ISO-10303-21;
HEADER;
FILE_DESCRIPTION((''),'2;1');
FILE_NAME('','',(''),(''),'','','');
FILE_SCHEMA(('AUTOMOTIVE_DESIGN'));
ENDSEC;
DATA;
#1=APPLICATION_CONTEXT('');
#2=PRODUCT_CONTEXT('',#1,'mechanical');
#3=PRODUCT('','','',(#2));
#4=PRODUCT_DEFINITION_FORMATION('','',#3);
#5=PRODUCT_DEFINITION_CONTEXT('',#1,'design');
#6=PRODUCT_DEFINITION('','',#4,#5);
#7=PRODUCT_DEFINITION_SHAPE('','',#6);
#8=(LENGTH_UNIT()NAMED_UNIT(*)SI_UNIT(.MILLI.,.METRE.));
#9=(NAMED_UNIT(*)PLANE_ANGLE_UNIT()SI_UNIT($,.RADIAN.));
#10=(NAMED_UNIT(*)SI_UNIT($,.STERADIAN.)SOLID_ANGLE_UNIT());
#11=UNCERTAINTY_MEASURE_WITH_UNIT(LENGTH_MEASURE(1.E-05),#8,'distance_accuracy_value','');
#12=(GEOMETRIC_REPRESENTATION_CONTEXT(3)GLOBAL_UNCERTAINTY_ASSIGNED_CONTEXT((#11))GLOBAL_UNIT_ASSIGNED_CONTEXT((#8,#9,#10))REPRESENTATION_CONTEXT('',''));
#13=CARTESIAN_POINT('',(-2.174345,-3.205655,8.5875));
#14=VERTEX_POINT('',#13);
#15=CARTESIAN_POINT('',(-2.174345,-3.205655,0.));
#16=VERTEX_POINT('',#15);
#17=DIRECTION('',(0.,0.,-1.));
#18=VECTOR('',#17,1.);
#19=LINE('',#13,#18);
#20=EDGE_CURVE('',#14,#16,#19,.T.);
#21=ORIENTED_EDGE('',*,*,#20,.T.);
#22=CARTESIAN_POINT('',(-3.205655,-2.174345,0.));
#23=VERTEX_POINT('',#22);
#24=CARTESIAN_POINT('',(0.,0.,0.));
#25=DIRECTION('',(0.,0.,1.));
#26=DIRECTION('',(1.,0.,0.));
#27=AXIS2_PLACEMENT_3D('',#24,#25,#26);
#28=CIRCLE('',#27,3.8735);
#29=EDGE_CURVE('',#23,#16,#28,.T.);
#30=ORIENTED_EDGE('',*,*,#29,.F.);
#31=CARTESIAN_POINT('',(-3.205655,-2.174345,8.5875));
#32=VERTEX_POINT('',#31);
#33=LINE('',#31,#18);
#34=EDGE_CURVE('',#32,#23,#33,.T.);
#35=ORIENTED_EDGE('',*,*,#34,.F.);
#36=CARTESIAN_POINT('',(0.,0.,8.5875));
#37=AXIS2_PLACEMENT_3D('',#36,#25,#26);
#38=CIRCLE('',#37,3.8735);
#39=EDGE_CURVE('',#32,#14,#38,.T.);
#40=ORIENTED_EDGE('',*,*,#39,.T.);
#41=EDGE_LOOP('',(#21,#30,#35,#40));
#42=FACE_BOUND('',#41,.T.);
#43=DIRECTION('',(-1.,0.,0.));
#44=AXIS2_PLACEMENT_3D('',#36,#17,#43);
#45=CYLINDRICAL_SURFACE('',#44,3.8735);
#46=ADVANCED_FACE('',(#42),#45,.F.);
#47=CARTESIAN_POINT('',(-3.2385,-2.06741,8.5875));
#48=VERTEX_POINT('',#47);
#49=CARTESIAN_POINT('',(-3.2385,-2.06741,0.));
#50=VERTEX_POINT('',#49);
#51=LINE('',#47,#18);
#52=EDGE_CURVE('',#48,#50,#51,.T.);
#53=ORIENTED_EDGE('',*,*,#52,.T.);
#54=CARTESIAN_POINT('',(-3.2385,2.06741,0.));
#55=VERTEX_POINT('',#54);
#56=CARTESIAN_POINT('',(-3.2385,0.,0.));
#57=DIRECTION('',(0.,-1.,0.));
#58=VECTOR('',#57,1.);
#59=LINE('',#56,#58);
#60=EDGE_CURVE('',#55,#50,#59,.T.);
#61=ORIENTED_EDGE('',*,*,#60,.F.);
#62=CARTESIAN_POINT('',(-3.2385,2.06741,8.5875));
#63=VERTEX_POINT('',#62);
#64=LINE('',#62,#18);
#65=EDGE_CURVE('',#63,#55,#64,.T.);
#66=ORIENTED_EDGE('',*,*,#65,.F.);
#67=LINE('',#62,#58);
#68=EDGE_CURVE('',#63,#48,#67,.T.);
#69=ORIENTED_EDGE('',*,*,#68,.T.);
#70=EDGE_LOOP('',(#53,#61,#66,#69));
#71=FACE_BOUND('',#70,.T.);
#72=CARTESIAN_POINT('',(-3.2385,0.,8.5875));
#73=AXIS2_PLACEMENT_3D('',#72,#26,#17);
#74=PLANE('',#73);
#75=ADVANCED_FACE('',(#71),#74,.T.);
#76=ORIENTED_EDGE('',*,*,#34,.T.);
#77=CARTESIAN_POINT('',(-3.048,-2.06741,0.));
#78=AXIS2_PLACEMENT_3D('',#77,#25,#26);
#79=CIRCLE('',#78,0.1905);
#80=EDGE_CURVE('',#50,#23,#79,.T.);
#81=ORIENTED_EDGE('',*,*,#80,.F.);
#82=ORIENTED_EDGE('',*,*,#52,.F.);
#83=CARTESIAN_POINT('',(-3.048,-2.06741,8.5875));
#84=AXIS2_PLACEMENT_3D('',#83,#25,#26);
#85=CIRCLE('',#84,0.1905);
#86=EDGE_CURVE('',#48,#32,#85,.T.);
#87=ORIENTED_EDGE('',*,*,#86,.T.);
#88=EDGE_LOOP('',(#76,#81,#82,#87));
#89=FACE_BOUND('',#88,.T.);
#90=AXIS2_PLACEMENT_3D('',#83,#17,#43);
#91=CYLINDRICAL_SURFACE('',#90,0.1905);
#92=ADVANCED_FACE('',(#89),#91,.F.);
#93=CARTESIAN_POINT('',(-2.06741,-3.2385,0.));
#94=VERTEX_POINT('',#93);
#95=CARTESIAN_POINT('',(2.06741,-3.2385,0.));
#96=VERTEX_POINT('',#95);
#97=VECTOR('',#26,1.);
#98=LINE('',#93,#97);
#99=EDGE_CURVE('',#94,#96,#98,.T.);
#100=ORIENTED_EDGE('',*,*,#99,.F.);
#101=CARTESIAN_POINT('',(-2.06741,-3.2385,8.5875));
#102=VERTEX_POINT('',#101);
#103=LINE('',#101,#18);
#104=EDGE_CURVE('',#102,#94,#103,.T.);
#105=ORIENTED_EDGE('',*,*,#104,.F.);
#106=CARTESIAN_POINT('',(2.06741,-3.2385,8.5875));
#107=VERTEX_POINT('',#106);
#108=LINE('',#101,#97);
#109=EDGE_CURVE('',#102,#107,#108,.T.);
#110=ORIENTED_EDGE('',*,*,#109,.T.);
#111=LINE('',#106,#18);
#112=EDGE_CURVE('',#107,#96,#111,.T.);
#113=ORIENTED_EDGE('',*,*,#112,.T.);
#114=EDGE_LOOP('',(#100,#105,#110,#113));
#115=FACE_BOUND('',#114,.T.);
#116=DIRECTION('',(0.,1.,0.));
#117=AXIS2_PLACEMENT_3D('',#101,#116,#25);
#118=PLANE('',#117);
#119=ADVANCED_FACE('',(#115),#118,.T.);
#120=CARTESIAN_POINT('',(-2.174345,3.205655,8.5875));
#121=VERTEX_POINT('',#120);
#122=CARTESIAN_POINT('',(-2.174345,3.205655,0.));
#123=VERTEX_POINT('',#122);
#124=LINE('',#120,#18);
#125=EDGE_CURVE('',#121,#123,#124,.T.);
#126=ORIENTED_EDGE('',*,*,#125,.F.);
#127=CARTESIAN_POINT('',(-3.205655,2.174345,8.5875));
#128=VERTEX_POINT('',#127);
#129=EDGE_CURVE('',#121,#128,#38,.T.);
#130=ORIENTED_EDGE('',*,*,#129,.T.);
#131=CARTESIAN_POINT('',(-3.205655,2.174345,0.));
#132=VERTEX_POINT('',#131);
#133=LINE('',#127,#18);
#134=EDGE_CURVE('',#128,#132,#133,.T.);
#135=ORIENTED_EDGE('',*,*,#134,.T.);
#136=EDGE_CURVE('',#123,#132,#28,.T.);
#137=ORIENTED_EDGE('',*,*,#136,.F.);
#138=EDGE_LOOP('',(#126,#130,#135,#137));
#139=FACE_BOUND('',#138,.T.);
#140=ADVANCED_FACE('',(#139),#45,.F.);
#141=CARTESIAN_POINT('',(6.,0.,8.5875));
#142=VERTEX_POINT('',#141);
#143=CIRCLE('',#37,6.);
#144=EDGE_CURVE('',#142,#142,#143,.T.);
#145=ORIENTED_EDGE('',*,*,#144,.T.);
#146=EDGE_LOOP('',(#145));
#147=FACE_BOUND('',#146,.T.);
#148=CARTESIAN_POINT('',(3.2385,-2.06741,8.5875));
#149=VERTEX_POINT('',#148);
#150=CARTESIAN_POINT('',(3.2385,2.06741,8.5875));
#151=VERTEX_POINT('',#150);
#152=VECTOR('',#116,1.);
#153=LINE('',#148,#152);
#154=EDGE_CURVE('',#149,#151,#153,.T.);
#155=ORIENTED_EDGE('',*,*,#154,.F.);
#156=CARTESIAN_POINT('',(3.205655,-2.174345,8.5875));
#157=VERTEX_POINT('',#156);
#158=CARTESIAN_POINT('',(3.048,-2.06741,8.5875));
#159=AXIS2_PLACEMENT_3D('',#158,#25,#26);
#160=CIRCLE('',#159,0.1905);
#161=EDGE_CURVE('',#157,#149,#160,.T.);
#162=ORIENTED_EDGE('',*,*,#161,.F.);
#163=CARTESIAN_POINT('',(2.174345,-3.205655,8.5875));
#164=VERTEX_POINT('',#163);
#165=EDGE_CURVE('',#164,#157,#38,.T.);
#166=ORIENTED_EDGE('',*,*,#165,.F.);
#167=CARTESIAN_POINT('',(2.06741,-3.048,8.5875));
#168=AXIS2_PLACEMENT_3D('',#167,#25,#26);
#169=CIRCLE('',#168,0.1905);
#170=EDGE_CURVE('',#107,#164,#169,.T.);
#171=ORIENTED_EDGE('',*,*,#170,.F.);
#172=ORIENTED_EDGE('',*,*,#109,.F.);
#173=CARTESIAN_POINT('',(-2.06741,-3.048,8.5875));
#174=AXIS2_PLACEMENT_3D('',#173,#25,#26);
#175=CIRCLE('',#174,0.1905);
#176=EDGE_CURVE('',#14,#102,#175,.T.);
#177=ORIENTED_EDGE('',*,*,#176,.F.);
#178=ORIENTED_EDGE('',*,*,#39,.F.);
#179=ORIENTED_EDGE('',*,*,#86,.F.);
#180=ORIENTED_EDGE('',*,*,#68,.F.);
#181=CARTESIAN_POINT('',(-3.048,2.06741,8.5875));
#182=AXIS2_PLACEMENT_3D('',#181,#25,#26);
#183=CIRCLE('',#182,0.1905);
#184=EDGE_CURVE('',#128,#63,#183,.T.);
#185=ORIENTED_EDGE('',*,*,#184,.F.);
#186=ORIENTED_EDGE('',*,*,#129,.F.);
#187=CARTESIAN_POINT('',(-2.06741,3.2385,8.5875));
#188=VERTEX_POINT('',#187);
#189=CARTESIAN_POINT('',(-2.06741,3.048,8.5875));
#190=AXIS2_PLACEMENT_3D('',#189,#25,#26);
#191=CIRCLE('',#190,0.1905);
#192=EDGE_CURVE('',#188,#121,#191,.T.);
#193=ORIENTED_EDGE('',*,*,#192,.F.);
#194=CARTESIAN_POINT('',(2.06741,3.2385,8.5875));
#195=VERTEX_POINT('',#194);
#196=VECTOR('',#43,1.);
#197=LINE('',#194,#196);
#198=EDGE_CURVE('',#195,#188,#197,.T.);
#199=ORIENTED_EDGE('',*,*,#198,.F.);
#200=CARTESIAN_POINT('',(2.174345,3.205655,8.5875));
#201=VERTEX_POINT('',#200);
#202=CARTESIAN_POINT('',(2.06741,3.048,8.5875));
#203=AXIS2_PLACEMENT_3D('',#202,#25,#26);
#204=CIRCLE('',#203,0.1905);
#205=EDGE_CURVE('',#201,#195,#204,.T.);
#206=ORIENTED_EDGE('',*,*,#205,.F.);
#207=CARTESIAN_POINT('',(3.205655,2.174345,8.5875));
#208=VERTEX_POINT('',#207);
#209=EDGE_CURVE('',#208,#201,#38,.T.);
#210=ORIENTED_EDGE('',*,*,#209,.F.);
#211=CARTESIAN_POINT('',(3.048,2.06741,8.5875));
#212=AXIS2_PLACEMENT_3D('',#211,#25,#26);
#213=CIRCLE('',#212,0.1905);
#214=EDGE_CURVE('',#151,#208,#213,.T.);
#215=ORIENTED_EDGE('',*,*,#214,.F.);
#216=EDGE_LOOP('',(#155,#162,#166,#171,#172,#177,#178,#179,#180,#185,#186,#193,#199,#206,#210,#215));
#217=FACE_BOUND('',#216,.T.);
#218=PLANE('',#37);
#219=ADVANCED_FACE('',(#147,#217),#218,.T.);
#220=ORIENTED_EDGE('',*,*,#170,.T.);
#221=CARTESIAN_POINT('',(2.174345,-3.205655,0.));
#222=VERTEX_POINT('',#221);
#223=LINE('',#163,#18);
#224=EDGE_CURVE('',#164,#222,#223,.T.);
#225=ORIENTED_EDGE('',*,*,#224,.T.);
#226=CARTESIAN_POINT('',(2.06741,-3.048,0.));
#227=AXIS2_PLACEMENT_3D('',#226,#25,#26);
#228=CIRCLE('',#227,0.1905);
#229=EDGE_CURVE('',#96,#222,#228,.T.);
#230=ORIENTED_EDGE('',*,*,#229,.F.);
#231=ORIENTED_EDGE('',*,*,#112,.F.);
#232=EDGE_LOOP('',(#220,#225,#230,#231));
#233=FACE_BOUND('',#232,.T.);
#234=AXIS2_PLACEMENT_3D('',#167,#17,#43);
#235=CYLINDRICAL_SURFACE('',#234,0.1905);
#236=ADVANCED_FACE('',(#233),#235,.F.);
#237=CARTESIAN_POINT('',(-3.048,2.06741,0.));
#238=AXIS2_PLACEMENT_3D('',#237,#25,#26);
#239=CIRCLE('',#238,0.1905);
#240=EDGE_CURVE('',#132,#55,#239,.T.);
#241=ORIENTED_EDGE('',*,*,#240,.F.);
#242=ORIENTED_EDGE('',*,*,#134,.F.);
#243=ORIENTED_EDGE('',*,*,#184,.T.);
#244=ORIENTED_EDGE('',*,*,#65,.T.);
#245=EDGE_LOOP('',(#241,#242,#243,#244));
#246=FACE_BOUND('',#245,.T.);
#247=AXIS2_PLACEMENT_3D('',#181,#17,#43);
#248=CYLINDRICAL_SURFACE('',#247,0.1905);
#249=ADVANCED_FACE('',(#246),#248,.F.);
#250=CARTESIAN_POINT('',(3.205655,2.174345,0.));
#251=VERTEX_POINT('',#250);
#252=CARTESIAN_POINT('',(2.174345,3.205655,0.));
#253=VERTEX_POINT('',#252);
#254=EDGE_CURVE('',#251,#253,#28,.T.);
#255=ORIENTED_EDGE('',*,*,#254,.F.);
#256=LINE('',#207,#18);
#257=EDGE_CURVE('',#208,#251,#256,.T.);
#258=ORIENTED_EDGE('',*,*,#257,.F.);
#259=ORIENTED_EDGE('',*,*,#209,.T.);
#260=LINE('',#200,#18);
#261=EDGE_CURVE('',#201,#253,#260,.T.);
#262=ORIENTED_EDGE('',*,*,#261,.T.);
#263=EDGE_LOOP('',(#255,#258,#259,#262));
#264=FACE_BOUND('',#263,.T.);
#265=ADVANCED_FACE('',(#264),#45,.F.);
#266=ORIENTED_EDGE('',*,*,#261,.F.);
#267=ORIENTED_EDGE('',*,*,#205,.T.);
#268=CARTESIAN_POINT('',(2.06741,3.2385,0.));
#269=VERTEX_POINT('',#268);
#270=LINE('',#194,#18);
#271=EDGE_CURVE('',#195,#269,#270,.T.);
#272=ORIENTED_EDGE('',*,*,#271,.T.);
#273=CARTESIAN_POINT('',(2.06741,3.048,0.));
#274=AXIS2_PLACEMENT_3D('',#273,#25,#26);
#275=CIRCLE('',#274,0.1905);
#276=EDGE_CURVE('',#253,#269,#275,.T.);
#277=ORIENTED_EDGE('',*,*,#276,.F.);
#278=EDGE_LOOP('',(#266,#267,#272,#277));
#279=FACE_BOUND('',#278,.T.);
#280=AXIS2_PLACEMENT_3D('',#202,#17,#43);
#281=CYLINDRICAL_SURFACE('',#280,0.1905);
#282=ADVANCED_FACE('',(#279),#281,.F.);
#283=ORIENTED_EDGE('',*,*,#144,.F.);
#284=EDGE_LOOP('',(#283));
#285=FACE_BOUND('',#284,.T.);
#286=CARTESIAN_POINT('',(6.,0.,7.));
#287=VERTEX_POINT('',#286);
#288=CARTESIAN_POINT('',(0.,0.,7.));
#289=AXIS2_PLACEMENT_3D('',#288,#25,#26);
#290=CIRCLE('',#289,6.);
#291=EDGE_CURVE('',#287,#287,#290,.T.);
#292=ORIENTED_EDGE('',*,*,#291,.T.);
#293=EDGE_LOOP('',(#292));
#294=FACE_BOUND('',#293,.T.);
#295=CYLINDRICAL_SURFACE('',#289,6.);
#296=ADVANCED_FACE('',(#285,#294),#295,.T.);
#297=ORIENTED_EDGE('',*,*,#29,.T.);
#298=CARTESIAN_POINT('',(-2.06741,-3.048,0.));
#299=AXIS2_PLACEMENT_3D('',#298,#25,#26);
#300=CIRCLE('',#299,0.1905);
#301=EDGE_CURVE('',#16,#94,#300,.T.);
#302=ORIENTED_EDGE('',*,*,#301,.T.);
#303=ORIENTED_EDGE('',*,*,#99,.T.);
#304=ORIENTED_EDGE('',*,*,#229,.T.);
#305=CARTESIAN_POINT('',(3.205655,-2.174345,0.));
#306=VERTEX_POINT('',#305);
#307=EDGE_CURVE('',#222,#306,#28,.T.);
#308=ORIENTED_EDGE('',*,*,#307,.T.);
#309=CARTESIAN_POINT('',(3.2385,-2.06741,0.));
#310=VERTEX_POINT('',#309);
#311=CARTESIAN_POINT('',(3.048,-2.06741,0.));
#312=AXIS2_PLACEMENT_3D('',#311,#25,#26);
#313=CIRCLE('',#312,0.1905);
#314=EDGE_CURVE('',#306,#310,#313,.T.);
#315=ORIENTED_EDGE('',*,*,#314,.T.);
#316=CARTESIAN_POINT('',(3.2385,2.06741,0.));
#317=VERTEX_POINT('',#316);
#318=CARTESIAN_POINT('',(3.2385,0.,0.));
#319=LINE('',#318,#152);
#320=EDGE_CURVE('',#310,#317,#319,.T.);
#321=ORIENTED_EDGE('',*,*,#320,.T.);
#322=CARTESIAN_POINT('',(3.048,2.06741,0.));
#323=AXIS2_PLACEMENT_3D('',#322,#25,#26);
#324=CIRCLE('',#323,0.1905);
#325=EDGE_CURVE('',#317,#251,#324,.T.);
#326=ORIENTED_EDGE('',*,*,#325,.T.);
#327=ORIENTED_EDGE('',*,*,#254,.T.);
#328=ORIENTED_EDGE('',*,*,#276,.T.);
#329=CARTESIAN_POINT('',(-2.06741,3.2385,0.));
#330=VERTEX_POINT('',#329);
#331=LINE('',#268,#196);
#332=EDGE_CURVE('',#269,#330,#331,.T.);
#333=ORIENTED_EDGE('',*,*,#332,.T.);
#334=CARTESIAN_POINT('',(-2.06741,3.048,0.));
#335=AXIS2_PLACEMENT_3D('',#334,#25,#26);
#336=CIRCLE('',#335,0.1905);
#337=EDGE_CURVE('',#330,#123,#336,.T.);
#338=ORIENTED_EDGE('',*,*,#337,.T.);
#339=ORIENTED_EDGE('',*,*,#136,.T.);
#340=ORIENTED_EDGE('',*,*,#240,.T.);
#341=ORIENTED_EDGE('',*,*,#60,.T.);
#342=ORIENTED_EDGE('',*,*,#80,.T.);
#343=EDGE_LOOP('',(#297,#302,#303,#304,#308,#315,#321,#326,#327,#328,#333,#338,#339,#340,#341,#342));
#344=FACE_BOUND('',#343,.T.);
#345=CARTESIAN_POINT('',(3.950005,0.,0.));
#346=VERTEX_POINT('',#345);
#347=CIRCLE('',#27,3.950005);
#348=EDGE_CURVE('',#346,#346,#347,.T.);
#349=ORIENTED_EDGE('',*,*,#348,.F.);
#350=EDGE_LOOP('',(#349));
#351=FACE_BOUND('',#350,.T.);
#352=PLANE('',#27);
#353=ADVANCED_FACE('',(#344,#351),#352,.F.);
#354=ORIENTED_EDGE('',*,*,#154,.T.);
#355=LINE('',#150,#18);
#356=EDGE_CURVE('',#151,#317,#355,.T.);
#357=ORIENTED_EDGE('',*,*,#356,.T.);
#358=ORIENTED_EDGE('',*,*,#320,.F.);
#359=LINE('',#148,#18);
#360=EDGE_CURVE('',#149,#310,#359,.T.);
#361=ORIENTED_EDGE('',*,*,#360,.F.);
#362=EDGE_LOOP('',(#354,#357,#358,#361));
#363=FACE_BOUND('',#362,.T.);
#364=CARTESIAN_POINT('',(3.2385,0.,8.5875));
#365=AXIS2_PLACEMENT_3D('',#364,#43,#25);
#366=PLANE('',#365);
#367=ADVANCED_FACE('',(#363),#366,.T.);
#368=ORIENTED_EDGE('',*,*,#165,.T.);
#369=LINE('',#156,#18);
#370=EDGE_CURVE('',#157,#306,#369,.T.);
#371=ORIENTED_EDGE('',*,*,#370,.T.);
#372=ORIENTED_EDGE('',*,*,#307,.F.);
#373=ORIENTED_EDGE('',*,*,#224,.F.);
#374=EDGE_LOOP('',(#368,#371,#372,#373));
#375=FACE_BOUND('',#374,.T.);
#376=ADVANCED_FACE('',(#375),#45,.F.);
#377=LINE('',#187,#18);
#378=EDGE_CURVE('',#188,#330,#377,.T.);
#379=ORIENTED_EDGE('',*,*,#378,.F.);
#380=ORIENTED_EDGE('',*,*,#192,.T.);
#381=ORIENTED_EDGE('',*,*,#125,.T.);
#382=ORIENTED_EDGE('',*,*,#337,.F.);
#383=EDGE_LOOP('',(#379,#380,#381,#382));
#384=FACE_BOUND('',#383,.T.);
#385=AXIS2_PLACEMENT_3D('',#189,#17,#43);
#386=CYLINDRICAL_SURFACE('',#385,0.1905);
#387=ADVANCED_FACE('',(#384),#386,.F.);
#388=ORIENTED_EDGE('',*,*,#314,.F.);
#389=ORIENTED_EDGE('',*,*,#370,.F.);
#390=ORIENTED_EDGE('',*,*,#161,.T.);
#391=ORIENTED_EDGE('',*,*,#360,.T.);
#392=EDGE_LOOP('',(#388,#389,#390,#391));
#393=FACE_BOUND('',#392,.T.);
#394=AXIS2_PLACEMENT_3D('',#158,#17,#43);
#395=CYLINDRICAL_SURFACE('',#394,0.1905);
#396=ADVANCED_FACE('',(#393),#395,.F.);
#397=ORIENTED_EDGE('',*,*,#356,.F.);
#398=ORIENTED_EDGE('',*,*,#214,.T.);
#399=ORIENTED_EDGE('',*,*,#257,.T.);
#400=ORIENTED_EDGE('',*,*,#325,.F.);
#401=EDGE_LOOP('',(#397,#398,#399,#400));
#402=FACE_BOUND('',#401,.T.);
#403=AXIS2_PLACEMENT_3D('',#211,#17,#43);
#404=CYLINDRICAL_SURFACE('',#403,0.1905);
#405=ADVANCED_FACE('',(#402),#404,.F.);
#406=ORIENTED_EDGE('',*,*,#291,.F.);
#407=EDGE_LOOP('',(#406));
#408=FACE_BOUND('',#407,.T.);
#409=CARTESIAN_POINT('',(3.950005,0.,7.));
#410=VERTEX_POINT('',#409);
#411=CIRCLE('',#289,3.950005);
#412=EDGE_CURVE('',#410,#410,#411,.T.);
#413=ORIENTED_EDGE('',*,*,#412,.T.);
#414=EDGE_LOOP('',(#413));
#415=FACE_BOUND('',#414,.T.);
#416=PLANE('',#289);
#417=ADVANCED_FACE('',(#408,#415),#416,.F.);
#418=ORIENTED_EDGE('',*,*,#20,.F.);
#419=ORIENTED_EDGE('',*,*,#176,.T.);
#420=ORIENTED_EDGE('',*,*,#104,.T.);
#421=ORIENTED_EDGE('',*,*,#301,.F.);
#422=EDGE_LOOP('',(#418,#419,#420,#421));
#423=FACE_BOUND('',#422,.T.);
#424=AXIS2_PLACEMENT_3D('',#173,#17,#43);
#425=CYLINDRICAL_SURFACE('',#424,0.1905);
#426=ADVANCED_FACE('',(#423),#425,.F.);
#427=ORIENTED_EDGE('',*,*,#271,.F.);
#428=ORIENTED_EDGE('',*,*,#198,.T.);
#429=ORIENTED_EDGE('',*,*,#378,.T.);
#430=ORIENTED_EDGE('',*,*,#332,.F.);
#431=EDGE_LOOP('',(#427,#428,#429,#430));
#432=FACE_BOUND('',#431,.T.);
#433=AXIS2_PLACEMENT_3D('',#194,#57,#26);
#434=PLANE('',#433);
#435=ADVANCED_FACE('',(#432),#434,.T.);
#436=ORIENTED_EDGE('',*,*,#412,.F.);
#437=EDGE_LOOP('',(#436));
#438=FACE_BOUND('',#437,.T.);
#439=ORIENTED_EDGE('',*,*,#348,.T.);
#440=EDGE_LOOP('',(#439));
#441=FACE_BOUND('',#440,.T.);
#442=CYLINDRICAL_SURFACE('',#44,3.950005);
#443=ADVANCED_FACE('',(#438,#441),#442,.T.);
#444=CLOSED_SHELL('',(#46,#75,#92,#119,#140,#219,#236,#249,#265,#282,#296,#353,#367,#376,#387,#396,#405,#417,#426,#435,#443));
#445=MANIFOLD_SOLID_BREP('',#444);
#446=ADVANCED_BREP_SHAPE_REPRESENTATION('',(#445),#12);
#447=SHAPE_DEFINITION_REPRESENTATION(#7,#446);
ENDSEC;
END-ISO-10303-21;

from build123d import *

# Parameters (mm, degrees)
BOSS_EXTRUDE1_OUTLINE_R = 3.9500048
BOSS_EXTRUDE1_DEPTH     = 8.5875
BOSS_EXTRUDE2_START     = -1.5875
SKETCH4_R               = 6
SKETCH4_R_2             = 3.9500048
BOSS_EXTRUDE2_DEPTH     = 1.5875


# Read off the part's stored shape, not the designer's step: Boss-Extrude1
with BuildPart() as part:
    # Boss-Extrude1 outline → Boss-Extrude1 (new body)
    with BuildSketch(Plane.XY):
        Circle(BOSS_EXTRUDE1_OUTLINE_R)
        with BuildLine():
            Line((2.067410216, -3.2385), (-2.067410216, -3.2385))
            ThreePointArc((-2.067410216, -3.2385), (-2.123342942, -3.230103762), (-2.174345227, -3.205655172))
            ThreePointArc((-2.174345227, -3.205655172), (-2.738978117, -2.738978117), (-3.205655172, -2.174345227))
            ThreePointArc((-3.205655172, -2.174345227), (-3.230103762, -2.123342942), (-3.2385, -2.067410216))
            Line((-3.2385, -2.067410216), (-3.2385, 2.067410216))
            ThreePointArc((-3.2385, 2.067410216), (-3.230103762, 2.123342942), (-3.205655172, 2.174345227))
            ThreePointArc((-3.205655172, 2.174345227), (-2.738978117, 2.738978117), (-2.174345227, 3.205655172))
            ThreePointArc((-2.174345227, 3.205655172), (-2.123342942, 3.230103762), (-2.067410216, 3.2385))
            Line((-2.067410216, 3.2385), (2.067410216, 3.2385))
            ThreePointArc((2.067410216, 3.2385), (2.123342942, 3.230103762), (2.174345227, 3.205655172))
            ThreePointArc((2.174345227, 3.205655172), (2.738978117, 2.738978117), (3.205655172, 2.174345227))
            ThreePointArc((3.205655172, 2.174345227), (3.230103762, 2.123342942), (3.2385, 2.067410216))
            Line((3.2385, 2.067410216), (3.2385, -2.067410216))
            ThreePointArc((3.2385, -2.067410216), (3.230103762, -2.123342942), (3.205655172, -2.174345227))
            ThreePointArc((3.205655172, -2.174345227), (2.738978117, -2.738978117), (2.174345227, -3.205655172))
            ThreePointArc((2.174345227, -3.205655172), (2.123342942, -3.230103762), (2.067410216, -3.2385))
        make_face(mode=Mode.SUBTRACT)
    extrude(amount=BOSS_EXTRUDE1_DEPTH)

    # Sketch4 → Boss-Extrude2 (add)
    with BuildSketch(Plane.XY.offset(8.5875).offset(BOSS_EXTRUDE2_START)):
        Circle(SKETCH4_R)
        Circle(SKETCH4_R_2, mode=Mode.SUBTRACT)
    extrude(amount=BOSS_EXTRUDE2_DEPTH)


solid = part.part
